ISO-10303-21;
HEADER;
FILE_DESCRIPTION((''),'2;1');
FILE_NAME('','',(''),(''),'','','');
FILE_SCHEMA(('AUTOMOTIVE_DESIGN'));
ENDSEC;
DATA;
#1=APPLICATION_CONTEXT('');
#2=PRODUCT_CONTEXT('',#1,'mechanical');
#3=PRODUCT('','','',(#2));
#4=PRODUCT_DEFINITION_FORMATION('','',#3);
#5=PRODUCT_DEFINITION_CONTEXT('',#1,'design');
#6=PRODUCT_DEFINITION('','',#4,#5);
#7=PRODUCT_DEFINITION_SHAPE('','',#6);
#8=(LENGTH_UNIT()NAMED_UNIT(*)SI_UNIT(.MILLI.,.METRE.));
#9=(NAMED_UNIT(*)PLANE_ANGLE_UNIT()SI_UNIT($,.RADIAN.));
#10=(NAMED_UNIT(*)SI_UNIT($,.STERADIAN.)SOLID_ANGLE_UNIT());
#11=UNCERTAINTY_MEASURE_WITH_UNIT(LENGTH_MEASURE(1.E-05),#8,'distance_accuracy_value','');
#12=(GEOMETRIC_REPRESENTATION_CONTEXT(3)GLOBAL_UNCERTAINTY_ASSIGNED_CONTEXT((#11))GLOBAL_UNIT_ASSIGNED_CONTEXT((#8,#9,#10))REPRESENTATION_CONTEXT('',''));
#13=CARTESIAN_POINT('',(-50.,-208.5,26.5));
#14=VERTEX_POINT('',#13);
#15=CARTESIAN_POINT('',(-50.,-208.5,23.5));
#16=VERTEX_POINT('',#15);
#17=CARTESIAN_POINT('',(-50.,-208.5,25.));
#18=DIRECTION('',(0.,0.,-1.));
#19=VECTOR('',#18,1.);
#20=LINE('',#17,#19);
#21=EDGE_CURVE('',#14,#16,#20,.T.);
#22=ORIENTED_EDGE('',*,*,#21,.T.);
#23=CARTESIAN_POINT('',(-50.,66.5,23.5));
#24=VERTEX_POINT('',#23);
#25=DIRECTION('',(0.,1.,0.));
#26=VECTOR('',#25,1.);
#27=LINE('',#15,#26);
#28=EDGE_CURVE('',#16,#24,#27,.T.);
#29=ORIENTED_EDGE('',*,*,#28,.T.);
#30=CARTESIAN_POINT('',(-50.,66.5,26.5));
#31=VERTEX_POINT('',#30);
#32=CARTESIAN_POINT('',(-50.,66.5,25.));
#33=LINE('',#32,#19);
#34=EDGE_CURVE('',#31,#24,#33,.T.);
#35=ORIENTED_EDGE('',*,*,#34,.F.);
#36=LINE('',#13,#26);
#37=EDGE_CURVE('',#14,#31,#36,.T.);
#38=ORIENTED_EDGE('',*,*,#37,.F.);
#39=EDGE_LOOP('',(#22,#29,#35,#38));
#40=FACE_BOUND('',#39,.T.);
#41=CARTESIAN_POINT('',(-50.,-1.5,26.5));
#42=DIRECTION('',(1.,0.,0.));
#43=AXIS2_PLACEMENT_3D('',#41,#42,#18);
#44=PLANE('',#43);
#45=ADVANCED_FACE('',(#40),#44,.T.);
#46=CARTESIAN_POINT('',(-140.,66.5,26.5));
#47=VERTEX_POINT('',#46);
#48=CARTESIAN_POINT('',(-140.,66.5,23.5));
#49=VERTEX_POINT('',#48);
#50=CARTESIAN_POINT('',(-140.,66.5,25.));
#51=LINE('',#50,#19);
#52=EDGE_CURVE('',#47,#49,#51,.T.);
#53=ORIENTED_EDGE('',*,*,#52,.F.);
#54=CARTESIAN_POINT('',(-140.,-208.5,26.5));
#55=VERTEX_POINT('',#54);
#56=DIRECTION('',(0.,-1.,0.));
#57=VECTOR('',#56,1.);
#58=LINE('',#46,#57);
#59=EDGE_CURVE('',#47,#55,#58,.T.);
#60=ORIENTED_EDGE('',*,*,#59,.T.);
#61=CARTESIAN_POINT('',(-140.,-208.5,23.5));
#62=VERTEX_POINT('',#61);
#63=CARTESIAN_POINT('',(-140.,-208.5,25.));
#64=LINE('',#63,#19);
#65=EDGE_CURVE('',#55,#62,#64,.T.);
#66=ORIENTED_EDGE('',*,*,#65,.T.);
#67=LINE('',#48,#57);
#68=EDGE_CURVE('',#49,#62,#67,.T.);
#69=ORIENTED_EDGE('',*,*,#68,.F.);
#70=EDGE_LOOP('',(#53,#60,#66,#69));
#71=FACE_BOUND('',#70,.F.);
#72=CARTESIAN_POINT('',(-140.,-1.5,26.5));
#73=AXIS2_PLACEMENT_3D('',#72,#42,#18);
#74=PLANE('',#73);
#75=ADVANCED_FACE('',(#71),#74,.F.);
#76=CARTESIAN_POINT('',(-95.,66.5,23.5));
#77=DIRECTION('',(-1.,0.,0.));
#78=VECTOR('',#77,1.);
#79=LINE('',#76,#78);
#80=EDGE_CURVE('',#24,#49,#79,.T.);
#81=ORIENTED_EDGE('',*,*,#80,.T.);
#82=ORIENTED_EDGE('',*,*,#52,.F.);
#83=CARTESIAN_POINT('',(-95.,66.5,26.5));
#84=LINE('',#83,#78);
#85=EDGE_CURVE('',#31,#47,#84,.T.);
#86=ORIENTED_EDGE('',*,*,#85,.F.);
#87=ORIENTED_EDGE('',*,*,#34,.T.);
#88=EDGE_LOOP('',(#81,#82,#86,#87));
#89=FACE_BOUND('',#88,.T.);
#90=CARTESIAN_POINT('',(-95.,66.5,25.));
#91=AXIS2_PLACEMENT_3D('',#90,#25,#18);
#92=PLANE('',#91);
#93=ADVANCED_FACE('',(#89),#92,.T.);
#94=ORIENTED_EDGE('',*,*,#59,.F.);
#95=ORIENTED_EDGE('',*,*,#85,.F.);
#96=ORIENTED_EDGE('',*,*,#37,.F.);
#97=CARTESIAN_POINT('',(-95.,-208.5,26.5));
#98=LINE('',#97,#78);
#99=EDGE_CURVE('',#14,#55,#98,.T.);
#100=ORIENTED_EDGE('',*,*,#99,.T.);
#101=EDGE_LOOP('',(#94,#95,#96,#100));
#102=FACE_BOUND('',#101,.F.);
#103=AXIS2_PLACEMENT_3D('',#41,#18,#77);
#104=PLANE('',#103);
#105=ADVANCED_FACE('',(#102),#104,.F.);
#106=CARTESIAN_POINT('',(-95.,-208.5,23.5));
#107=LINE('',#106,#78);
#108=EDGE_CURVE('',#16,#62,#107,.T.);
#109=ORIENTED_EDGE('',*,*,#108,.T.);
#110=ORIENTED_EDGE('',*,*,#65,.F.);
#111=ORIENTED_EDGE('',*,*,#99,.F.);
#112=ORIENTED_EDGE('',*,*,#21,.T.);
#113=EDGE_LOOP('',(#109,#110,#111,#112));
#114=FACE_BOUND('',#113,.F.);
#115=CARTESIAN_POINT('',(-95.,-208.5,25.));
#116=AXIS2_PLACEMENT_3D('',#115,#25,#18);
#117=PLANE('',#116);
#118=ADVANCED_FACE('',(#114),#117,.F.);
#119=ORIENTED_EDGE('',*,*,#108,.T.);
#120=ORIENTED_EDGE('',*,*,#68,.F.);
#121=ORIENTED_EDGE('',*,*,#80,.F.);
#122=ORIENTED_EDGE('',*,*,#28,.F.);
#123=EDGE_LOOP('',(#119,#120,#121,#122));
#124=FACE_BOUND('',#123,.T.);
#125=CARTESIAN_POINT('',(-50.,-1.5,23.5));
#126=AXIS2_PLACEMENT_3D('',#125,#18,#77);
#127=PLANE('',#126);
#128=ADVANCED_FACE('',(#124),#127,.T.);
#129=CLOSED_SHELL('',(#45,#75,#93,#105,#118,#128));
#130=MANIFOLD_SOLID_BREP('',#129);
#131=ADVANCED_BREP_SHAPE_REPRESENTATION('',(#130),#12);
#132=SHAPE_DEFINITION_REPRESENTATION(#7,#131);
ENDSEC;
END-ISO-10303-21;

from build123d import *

# Parameters (mm, degrees)
F8_E5_RIGHT_W = 3
F8_E5_RIGHT_H = 90
F9_DEPTH      = 68
F10_DEPTH     = 207


# Not quite as in the source:
# - the program builds the solid bodies; features that only make, move or delete a surface that nothing else refers to are left out


with BuildPart() as f9:
    # F8_E5_right (on explicit) → F9 (new body)
    with BuildSketch(Plane(origin=(-50, -1.5, 26.5), x_dir=(0, 0, -1), z_dir=(0, 1, 0))):
        with Locations((1.5, 45)):
            Rectangle(F8_E5_RIGHT_W, F8_E5_RIGHT_H)
    extrude(amount=F9_DEPTH)

    # F8_E5_right (on explicit) → F10 (join)
    with BuildSketch(Plane(origin=(-50, -1.5, 26.5), x_dir=(0, 0, -1), z_dir=(0, 1, 0))):
        with Locations((1.5, 45)):
            Rectangle(F8_E5_RIGHT_W, F8_E5_RIGHT_H)
    extrude(amount=-F10_DEPTH)


solid = f9.part
